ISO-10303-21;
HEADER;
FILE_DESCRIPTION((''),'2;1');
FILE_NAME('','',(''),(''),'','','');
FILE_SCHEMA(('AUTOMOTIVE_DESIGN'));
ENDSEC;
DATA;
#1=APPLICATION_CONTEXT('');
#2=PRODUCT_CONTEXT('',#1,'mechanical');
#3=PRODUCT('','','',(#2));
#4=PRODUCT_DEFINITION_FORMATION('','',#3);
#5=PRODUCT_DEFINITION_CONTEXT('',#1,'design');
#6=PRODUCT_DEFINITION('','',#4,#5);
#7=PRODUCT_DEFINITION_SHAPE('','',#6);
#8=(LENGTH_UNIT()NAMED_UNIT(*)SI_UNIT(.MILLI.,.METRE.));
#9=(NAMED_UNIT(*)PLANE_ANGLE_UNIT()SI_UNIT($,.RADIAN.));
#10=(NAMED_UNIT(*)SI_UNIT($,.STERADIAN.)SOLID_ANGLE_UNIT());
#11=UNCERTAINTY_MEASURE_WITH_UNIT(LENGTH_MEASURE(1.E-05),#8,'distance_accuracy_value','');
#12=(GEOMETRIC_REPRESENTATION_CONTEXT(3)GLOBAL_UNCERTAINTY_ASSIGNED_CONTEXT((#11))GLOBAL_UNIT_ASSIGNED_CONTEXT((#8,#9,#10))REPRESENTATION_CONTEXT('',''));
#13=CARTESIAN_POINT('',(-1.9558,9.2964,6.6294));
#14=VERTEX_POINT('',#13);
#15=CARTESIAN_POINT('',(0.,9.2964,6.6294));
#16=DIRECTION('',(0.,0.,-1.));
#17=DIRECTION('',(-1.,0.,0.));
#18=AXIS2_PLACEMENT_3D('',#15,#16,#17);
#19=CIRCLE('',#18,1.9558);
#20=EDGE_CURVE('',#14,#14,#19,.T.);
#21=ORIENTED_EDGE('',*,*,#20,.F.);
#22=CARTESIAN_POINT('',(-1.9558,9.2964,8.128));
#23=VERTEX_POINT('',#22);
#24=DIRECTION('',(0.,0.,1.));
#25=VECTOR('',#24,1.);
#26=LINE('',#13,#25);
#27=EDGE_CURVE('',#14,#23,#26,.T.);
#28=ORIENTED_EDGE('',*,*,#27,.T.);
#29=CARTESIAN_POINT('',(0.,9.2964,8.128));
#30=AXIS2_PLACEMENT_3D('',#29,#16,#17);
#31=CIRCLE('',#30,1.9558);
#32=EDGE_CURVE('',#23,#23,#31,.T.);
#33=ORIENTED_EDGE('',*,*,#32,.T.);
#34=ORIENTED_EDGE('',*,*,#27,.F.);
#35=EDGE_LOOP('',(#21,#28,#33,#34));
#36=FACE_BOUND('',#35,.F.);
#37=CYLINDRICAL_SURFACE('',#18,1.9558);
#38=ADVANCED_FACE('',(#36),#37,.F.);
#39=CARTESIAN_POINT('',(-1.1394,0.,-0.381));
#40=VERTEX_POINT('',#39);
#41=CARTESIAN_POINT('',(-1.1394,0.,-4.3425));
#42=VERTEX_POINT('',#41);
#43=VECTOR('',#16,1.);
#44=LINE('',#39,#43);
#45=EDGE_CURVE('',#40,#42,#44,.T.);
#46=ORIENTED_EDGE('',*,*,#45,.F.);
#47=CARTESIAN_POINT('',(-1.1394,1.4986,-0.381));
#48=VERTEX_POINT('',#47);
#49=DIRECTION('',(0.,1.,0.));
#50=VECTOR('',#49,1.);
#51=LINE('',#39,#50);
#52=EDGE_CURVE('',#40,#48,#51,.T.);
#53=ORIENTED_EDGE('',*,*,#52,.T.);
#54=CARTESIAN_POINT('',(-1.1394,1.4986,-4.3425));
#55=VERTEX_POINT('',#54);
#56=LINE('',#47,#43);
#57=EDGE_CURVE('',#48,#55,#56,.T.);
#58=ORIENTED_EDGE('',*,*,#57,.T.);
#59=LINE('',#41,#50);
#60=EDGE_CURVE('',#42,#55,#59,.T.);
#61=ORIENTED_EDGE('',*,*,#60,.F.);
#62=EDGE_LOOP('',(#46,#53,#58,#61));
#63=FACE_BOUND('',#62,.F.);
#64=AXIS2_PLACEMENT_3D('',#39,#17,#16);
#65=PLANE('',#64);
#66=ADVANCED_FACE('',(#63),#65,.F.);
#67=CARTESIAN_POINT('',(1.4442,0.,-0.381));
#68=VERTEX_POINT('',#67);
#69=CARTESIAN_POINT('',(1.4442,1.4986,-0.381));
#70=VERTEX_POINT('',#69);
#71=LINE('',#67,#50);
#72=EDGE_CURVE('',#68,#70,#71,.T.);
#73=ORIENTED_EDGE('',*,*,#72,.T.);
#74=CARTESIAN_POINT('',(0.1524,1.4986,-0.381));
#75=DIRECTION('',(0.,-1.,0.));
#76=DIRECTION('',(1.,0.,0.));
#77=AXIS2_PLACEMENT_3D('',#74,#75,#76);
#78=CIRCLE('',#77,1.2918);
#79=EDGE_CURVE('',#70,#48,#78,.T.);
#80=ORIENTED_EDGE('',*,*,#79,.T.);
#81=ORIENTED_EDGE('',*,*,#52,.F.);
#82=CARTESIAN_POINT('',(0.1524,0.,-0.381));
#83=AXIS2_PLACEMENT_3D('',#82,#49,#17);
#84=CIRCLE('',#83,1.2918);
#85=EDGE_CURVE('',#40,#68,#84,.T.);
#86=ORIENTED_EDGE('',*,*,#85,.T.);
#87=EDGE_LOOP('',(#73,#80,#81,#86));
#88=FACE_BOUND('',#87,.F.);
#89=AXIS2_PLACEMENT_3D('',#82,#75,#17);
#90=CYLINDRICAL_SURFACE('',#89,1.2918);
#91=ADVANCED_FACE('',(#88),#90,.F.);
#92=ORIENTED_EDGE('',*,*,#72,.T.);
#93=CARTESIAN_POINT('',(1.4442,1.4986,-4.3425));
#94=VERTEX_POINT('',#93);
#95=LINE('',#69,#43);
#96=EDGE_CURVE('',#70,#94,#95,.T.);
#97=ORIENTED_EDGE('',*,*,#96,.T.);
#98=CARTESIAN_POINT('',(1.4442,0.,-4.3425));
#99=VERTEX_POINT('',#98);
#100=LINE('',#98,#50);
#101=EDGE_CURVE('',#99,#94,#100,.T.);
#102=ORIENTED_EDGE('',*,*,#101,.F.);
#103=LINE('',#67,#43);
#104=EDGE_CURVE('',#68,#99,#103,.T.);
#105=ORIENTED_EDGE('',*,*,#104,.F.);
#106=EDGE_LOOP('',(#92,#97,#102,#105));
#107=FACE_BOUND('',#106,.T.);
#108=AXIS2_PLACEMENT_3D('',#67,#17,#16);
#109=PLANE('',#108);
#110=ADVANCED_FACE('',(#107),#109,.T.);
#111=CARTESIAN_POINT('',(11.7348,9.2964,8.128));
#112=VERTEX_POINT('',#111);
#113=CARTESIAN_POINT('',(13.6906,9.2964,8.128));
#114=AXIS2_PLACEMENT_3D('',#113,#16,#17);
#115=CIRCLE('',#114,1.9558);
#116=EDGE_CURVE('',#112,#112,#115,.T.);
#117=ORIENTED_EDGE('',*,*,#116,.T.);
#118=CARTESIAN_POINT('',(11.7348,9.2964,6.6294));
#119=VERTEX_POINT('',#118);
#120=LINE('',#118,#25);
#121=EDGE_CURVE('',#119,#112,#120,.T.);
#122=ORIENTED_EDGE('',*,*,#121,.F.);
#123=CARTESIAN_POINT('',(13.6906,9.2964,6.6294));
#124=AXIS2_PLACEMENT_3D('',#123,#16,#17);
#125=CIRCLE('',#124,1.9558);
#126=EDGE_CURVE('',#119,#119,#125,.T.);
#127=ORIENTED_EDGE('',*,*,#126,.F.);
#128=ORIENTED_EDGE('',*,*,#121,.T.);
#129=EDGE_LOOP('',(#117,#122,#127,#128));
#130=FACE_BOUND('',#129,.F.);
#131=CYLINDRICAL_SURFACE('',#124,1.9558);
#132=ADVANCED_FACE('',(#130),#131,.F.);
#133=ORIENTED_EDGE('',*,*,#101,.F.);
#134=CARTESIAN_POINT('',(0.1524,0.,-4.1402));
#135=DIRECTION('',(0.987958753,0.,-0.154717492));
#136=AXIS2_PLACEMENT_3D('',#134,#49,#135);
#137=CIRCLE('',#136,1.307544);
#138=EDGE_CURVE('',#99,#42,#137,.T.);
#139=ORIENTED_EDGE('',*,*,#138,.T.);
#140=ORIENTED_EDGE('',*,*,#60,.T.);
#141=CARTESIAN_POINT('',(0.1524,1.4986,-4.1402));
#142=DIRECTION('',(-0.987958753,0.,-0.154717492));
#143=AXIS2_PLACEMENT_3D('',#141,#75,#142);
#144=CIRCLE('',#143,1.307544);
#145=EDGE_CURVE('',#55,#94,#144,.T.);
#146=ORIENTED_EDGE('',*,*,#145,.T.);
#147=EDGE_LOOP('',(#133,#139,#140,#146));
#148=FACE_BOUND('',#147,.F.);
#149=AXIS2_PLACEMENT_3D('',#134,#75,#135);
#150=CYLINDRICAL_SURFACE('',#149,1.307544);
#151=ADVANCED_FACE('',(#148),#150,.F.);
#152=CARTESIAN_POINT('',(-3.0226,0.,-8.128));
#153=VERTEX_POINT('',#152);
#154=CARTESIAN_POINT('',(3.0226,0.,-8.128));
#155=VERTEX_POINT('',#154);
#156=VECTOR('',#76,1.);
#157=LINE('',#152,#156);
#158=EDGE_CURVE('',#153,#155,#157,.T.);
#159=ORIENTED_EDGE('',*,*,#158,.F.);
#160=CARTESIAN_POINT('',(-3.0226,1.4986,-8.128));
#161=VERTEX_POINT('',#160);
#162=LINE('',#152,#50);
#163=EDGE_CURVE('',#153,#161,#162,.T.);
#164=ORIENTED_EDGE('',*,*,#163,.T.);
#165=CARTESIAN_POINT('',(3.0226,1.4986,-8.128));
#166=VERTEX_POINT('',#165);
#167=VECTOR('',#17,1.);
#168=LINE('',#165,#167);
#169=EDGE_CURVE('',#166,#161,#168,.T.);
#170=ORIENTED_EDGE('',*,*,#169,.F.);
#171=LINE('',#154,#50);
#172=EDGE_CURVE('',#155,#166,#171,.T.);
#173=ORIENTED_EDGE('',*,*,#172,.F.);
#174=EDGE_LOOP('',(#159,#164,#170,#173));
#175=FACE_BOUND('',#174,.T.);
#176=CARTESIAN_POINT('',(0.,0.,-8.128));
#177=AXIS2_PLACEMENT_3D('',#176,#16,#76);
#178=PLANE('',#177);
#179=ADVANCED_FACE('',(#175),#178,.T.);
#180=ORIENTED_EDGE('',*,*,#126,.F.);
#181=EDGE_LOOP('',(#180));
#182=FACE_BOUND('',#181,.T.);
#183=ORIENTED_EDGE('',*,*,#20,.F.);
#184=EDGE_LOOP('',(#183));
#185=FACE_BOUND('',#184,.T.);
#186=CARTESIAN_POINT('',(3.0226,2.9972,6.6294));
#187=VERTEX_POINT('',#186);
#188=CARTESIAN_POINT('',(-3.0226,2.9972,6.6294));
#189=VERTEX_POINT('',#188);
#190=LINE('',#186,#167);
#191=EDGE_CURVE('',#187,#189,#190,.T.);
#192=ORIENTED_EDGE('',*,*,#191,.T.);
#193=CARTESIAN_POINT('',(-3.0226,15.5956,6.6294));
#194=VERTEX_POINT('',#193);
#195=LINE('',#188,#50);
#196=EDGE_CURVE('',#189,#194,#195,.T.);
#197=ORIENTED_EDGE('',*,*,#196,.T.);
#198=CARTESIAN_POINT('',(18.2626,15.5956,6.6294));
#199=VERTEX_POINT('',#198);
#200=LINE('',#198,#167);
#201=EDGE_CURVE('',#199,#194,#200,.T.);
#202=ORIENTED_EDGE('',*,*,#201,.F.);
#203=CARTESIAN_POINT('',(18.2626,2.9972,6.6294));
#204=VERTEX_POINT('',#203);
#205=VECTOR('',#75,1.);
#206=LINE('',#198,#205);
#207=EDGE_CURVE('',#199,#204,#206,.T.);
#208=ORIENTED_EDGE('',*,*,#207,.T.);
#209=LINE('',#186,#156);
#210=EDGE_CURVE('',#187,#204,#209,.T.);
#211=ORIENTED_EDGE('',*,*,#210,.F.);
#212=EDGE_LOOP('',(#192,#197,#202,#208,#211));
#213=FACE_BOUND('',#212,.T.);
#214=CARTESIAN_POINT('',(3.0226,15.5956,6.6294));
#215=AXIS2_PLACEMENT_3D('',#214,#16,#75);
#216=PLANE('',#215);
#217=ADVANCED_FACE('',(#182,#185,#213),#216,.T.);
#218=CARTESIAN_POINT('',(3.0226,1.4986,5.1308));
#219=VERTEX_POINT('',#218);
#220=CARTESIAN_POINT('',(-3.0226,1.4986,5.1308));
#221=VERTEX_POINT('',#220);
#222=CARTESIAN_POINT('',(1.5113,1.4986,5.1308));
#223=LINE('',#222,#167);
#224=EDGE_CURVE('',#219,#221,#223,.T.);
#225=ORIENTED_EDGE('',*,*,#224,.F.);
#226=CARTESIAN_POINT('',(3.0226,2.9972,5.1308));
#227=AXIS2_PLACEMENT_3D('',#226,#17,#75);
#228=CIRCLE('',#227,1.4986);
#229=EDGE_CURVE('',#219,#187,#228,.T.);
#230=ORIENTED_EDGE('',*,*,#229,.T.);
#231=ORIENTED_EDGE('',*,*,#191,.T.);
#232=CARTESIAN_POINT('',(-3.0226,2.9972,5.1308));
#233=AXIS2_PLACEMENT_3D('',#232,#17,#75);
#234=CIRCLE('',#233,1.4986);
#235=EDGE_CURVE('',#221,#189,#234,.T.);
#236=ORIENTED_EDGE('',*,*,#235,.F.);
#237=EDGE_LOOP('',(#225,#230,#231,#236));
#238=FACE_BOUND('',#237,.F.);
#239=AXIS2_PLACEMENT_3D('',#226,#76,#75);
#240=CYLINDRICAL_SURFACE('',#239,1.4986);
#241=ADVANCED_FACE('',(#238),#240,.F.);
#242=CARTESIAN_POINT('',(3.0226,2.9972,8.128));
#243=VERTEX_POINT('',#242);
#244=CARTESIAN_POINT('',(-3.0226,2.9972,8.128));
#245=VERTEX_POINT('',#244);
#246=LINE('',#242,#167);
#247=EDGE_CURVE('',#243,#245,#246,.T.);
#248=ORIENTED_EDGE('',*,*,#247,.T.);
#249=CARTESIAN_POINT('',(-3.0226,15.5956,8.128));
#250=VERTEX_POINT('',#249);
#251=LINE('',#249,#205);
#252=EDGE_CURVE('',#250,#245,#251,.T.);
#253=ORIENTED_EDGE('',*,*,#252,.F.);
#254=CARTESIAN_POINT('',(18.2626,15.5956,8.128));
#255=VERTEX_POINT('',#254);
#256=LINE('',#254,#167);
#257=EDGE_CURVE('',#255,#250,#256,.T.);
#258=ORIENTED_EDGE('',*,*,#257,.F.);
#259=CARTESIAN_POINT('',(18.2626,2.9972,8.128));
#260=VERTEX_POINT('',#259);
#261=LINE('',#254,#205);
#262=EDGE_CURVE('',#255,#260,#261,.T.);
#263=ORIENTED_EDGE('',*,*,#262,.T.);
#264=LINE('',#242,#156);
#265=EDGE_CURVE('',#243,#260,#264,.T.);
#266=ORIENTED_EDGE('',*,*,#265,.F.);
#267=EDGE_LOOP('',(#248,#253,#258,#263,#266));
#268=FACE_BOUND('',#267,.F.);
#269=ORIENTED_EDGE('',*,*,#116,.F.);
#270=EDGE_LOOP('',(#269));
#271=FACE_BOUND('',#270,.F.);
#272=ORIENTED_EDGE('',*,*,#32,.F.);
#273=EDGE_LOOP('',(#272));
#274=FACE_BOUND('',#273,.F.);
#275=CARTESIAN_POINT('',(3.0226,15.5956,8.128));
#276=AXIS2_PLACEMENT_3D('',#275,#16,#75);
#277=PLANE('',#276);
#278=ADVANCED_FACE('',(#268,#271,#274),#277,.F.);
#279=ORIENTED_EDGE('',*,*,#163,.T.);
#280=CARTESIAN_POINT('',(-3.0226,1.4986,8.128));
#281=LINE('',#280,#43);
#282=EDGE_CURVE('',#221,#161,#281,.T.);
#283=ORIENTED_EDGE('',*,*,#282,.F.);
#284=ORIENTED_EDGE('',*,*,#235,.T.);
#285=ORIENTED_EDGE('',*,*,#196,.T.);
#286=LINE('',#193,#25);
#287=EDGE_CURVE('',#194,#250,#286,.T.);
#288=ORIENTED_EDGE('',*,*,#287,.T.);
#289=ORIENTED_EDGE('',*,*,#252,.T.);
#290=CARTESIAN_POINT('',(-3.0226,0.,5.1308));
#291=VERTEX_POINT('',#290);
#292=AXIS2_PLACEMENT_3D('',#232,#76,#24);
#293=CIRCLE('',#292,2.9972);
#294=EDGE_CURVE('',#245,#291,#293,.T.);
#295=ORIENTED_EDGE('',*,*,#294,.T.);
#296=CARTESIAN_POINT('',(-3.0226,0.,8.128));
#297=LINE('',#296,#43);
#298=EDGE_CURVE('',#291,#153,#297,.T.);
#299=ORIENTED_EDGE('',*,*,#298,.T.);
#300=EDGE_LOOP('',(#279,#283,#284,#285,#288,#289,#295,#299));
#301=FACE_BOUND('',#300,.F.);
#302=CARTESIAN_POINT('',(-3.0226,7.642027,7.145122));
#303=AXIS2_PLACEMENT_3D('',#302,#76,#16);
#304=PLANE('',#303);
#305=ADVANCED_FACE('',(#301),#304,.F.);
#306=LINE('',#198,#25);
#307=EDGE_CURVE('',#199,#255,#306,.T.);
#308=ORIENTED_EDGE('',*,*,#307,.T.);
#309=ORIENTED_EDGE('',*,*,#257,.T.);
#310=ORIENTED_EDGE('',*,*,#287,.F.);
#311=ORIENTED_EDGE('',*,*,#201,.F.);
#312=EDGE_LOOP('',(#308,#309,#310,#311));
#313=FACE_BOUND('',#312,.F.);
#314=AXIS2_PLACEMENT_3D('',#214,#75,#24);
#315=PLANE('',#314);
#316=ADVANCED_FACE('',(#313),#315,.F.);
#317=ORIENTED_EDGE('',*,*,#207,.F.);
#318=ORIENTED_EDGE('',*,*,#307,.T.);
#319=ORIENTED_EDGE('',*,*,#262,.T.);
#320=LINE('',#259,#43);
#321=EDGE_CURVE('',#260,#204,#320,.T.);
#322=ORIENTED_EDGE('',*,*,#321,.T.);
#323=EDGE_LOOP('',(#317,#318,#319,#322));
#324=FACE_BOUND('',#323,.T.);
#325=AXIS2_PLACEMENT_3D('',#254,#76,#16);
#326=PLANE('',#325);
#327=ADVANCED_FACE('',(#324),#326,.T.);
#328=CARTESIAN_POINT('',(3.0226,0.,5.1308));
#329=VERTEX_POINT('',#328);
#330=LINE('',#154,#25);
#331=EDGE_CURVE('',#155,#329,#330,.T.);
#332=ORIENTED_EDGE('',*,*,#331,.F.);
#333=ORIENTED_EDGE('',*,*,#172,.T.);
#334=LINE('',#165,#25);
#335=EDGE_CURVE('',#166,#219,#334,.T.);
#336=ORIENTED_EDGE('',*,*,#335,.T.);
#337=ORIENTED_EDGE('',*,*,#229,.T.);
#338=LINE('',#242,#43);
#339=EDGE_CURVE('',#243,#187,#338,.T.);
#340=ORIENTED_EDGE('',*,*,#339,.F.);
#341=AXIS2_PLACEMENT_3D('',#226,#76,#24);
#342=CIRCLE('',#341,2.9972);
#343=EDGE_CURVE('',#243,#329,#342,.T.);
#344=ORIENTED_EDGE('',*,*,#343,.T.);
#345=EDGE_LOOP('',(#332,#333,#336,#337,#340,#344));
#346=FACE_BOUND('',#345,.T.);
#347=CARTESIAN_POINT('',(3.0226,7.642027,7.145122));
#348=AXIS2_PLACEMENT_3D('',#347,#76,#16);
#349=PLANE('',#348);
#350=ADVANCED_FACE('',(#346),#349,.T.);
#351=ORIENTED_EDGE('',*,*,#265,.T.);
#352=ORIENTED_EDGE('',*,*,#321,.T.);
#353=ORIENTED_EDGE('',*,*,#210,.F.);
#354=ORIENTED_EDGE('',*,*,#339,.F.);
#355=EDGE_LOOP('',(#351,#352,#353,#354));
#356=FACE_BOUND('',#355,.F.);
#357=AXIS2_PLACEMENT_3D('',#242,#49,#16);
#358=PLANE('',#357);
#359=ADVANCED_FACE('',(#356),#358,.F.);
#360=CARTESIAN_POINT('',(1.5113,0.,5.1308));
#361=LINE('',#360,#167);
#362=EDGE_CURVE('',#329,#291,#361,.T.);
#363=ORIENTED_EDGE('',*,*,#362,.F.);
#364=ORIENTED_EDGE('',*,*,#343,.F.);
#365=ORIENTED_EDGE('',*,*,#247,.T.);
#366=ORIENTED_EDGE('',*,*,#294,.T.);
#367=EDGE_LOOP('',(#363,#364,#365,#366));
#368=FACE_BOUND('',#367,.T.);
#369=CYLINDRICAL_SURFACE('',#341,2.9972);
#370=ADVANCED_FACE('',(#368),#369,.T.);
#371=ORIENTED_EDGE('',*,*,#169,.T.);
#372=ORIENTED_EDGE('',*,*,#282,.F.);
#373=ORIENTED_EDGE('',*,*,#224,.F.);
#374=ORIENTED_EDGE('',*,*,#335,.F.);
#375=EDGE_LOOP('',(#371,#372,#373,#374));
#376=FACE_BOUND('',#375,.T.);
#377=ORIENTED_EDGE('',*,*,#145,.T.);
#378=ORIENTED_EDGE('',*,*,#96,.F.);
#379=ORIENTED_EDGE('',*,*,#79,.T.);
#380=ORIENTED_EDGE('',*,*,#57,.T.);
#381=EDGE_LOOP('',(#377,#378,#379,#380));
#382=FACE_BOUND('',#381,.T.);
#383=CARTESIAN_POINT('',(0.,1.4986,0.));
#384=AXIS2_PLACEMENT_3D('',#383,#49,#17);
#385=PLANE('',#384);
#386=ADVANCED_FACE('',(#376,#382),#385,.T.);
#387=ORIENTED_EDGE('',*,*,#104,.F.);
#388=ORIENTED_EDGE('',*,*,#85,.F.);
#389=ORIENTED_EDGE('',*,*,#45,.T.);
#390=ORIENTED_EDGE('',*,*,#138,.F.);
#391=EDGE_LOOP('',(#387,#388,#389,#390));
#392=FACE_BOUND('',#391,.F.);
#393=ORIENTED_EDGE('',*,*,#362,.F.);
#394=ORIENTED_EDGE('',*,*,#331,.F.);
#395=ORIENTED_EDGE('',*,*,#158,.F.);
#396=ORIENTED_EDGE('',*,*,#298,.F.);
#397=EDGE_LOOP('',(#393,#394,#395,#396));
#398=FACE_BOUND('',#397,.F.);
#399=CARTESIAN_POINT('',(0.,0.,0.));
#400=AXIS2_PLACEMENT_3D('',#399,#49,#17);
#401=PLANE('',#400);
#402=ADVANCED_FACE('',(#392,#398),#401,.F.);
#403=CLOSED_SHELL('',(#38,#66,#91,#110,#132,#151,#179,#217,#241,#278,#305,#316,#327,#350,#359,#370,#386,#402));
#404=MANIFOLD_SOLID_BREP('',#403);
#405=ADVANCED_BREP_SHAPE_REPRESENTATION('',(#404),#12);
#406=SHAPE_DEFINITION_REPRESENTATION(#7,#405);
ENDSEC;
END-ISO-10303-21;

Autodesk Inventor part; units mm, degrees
ref_plane "YZ Plane" through (0, 0, 0) normal (1, 0, 0) x (0, 1, 0)
ref_plane "XZ Plane" through (0, 0, 0) normal (0, 1, 0) x (-1, 0, 0)
ref_plane "XY Plane" through (0, 0, 0) normal (0, 0, 1) x (1, 0, 0)
sketch "Sketch1" plane through (0, 0, 0) normal (0, 1, 0) x (-1, 0, 0)
  line L0 (-3.0226, 8.128) -> (3.0226, 8.128)
  line L1 (3.0226, 8.128) -> (3.0226, -8.128)
  line L2 (3.0226, -8.128) -> (-3.0226, -8.128)
  line L3 (-3.0226, -8.128) -> (-3.0226, 8.128)
  line L4 (-3.0226, 8.128) -> (3.0226, -8.128) construction
  line L5 (3.0226, 8.128) -> (-3.0226, -8.128) construction
  line L6 (1.1394, -0.381) -> (1.1394, -4.3425)
  line L7 (-1.4442, -0.381) -> (-1.4442, -4.3425)
  arc A0 (-1.4442, -4.3425) -> (1.1394, -4.3425) centre (-0.1524, -4.1402) ccw
  arc A1 (1.1394, -0.381) -> (-1.4442, -0.381) centre (-0.1524, -0.381) ccw
  line L8 (0, 9.1418) -> (0, -10.0518)
  point P0 (0, 0)
  dimension "d0" = 16.256
  dimension "d1" = 6.0452
  dimension "d2" = 3.9878
  dimension "d3" = 7.747
  dimension "d4" = 3.175
  dimension "d5" = 3.175
extrude "Plate1" add sketch "Sketch1" along normal blind 1.4986 contours L0 L8 A1 L7 A0 L2 L3 | L0 L1 L2 L8 A0 L6 A1
sketch "Sketch2" plane through (3.0226, 0, 6.6294) normal (0, 0, 1) x (1, 0, 0)
  line L0 (-6.0452, 0) -> (0, 0)
  line L1 (0, 0) -> (0, 15.5956)
  line L2 (0, 15.5956) -> (-6.0452, 15.5956)
  line L3 (-6.0452, 15.5956) -> (-6.0452, 0)
edge flange "Flange1" height 15.5956 angle 90 thickness 1.4986 bend radius 1.4986 thickness toward (0, 0, 1) relief straight relief width 1.4986 relief depth 0.7493 edges at (0, 1.4986, 8.128) wall of the first edge with corners at (-3.0226, 0, 6.6294) (3.0226, 0, 6.6294) (3.0226, 15.5956, 6.6294) (-3.0226, 15.5956, 6.6294)
bend "Bend1"
corner "Corner1"
sketch "Sketch4" plane through (3.0226, 15.5956, 6.6294) normal (0, 0, -1) x (-1, 0, 0)
  circle A0 centre (3.0226, -6.2992) radius 1.9558
  line L0 (6.0452, 0) -> (0, 0) projected
  point P0 (3.0226, -15.5956)
  dimension "d21" = 6.2992
  dimension "d22" = 3.9116
extrude "Extrusion3" cut sketch "Sketch4" against normal blind 1.4986
sketch "Sketch7" plane through (3.0226, 15.5956, 8.128) normal (1, 0, 0) x (0, 0, -1)
  line L0 (0, -12.5984) -> (1.4986, -12.5984) projected
  line L1 (1.4986, 0) -> (1.4986, -12.5984) projected
  line L2 (1.4986, 0) -> (0, 0) projected
  line L3 (0, 0) -> (0, -12.5984) projected
  line L4 (0, 0) -> (1.4986, 0)
  line L5 (1.4986, 0) -> (1.4986, -12.5984)
  line L6 (1.4986, -12.5984) -> (0, -12.5984)
  line L7 (0, -12.5984) -> (0, 0)
  point P0 (8.128, -15.5956)
extrude "Extrusion6" add sketch "Sketch7" along normal blind 15.24
sketch "Sketch9" plane through (-3.0226, 2.9972, 6.6294) normal (0, 0, -1) x (-1, 0, 0)
  circle A0 centre (-16.7132, 6.2992) radius 1.9558
  line L0 (-21.2852, 0) -> (-21.2852, 12.5984) projected
  line L1 (0, 12.5984) -> (-21.2852, 12.5984) projected
  point P0 (-3.0226, -2.9972)
  dimension "d39" = 3.9116
  dimension "d40" = 4.572
  dimension "d41" = 6.2992
extrude "Extrusion8" cut sketch "Sketch9" against normal up to surface (1.4986 mm away)
equation "\"d11\" = BendReliefWidth"
equation "\"d12\" = BendReliefDepth"
equation "\"d13\" = MinimumRemnant"
equation "\"d14\" = BendRadius"
equation "\"d17\" = BendRadius"
equation "\"d18\" = CornerReliefSize"
equation "\"d19\" = GapSize"
equation "\"d20\" = JacobiRadiusSize"
equation "\"BendRadius\" = Thickness"
equation "\"BendReliefWidth\" = Thickness"
equation "\"BendReliefDepth\" = 0.5 * Thickness"
equation "\"CornerReliefSize\" = 4 * Thickness"
equation "\"MinimumRemnant\" = 2 * Thickness"
equation "\"TransitionRadius\" = BendRadius"
equation "\"JacobiRadiusSize\" = Thickness"
equation "\"GapSize\" = Thickness"
equation "\"d10\" = BendRadius"
equation "\"Thickness\" = 1.4986"
properties part number "dsub37Bracket_left"
